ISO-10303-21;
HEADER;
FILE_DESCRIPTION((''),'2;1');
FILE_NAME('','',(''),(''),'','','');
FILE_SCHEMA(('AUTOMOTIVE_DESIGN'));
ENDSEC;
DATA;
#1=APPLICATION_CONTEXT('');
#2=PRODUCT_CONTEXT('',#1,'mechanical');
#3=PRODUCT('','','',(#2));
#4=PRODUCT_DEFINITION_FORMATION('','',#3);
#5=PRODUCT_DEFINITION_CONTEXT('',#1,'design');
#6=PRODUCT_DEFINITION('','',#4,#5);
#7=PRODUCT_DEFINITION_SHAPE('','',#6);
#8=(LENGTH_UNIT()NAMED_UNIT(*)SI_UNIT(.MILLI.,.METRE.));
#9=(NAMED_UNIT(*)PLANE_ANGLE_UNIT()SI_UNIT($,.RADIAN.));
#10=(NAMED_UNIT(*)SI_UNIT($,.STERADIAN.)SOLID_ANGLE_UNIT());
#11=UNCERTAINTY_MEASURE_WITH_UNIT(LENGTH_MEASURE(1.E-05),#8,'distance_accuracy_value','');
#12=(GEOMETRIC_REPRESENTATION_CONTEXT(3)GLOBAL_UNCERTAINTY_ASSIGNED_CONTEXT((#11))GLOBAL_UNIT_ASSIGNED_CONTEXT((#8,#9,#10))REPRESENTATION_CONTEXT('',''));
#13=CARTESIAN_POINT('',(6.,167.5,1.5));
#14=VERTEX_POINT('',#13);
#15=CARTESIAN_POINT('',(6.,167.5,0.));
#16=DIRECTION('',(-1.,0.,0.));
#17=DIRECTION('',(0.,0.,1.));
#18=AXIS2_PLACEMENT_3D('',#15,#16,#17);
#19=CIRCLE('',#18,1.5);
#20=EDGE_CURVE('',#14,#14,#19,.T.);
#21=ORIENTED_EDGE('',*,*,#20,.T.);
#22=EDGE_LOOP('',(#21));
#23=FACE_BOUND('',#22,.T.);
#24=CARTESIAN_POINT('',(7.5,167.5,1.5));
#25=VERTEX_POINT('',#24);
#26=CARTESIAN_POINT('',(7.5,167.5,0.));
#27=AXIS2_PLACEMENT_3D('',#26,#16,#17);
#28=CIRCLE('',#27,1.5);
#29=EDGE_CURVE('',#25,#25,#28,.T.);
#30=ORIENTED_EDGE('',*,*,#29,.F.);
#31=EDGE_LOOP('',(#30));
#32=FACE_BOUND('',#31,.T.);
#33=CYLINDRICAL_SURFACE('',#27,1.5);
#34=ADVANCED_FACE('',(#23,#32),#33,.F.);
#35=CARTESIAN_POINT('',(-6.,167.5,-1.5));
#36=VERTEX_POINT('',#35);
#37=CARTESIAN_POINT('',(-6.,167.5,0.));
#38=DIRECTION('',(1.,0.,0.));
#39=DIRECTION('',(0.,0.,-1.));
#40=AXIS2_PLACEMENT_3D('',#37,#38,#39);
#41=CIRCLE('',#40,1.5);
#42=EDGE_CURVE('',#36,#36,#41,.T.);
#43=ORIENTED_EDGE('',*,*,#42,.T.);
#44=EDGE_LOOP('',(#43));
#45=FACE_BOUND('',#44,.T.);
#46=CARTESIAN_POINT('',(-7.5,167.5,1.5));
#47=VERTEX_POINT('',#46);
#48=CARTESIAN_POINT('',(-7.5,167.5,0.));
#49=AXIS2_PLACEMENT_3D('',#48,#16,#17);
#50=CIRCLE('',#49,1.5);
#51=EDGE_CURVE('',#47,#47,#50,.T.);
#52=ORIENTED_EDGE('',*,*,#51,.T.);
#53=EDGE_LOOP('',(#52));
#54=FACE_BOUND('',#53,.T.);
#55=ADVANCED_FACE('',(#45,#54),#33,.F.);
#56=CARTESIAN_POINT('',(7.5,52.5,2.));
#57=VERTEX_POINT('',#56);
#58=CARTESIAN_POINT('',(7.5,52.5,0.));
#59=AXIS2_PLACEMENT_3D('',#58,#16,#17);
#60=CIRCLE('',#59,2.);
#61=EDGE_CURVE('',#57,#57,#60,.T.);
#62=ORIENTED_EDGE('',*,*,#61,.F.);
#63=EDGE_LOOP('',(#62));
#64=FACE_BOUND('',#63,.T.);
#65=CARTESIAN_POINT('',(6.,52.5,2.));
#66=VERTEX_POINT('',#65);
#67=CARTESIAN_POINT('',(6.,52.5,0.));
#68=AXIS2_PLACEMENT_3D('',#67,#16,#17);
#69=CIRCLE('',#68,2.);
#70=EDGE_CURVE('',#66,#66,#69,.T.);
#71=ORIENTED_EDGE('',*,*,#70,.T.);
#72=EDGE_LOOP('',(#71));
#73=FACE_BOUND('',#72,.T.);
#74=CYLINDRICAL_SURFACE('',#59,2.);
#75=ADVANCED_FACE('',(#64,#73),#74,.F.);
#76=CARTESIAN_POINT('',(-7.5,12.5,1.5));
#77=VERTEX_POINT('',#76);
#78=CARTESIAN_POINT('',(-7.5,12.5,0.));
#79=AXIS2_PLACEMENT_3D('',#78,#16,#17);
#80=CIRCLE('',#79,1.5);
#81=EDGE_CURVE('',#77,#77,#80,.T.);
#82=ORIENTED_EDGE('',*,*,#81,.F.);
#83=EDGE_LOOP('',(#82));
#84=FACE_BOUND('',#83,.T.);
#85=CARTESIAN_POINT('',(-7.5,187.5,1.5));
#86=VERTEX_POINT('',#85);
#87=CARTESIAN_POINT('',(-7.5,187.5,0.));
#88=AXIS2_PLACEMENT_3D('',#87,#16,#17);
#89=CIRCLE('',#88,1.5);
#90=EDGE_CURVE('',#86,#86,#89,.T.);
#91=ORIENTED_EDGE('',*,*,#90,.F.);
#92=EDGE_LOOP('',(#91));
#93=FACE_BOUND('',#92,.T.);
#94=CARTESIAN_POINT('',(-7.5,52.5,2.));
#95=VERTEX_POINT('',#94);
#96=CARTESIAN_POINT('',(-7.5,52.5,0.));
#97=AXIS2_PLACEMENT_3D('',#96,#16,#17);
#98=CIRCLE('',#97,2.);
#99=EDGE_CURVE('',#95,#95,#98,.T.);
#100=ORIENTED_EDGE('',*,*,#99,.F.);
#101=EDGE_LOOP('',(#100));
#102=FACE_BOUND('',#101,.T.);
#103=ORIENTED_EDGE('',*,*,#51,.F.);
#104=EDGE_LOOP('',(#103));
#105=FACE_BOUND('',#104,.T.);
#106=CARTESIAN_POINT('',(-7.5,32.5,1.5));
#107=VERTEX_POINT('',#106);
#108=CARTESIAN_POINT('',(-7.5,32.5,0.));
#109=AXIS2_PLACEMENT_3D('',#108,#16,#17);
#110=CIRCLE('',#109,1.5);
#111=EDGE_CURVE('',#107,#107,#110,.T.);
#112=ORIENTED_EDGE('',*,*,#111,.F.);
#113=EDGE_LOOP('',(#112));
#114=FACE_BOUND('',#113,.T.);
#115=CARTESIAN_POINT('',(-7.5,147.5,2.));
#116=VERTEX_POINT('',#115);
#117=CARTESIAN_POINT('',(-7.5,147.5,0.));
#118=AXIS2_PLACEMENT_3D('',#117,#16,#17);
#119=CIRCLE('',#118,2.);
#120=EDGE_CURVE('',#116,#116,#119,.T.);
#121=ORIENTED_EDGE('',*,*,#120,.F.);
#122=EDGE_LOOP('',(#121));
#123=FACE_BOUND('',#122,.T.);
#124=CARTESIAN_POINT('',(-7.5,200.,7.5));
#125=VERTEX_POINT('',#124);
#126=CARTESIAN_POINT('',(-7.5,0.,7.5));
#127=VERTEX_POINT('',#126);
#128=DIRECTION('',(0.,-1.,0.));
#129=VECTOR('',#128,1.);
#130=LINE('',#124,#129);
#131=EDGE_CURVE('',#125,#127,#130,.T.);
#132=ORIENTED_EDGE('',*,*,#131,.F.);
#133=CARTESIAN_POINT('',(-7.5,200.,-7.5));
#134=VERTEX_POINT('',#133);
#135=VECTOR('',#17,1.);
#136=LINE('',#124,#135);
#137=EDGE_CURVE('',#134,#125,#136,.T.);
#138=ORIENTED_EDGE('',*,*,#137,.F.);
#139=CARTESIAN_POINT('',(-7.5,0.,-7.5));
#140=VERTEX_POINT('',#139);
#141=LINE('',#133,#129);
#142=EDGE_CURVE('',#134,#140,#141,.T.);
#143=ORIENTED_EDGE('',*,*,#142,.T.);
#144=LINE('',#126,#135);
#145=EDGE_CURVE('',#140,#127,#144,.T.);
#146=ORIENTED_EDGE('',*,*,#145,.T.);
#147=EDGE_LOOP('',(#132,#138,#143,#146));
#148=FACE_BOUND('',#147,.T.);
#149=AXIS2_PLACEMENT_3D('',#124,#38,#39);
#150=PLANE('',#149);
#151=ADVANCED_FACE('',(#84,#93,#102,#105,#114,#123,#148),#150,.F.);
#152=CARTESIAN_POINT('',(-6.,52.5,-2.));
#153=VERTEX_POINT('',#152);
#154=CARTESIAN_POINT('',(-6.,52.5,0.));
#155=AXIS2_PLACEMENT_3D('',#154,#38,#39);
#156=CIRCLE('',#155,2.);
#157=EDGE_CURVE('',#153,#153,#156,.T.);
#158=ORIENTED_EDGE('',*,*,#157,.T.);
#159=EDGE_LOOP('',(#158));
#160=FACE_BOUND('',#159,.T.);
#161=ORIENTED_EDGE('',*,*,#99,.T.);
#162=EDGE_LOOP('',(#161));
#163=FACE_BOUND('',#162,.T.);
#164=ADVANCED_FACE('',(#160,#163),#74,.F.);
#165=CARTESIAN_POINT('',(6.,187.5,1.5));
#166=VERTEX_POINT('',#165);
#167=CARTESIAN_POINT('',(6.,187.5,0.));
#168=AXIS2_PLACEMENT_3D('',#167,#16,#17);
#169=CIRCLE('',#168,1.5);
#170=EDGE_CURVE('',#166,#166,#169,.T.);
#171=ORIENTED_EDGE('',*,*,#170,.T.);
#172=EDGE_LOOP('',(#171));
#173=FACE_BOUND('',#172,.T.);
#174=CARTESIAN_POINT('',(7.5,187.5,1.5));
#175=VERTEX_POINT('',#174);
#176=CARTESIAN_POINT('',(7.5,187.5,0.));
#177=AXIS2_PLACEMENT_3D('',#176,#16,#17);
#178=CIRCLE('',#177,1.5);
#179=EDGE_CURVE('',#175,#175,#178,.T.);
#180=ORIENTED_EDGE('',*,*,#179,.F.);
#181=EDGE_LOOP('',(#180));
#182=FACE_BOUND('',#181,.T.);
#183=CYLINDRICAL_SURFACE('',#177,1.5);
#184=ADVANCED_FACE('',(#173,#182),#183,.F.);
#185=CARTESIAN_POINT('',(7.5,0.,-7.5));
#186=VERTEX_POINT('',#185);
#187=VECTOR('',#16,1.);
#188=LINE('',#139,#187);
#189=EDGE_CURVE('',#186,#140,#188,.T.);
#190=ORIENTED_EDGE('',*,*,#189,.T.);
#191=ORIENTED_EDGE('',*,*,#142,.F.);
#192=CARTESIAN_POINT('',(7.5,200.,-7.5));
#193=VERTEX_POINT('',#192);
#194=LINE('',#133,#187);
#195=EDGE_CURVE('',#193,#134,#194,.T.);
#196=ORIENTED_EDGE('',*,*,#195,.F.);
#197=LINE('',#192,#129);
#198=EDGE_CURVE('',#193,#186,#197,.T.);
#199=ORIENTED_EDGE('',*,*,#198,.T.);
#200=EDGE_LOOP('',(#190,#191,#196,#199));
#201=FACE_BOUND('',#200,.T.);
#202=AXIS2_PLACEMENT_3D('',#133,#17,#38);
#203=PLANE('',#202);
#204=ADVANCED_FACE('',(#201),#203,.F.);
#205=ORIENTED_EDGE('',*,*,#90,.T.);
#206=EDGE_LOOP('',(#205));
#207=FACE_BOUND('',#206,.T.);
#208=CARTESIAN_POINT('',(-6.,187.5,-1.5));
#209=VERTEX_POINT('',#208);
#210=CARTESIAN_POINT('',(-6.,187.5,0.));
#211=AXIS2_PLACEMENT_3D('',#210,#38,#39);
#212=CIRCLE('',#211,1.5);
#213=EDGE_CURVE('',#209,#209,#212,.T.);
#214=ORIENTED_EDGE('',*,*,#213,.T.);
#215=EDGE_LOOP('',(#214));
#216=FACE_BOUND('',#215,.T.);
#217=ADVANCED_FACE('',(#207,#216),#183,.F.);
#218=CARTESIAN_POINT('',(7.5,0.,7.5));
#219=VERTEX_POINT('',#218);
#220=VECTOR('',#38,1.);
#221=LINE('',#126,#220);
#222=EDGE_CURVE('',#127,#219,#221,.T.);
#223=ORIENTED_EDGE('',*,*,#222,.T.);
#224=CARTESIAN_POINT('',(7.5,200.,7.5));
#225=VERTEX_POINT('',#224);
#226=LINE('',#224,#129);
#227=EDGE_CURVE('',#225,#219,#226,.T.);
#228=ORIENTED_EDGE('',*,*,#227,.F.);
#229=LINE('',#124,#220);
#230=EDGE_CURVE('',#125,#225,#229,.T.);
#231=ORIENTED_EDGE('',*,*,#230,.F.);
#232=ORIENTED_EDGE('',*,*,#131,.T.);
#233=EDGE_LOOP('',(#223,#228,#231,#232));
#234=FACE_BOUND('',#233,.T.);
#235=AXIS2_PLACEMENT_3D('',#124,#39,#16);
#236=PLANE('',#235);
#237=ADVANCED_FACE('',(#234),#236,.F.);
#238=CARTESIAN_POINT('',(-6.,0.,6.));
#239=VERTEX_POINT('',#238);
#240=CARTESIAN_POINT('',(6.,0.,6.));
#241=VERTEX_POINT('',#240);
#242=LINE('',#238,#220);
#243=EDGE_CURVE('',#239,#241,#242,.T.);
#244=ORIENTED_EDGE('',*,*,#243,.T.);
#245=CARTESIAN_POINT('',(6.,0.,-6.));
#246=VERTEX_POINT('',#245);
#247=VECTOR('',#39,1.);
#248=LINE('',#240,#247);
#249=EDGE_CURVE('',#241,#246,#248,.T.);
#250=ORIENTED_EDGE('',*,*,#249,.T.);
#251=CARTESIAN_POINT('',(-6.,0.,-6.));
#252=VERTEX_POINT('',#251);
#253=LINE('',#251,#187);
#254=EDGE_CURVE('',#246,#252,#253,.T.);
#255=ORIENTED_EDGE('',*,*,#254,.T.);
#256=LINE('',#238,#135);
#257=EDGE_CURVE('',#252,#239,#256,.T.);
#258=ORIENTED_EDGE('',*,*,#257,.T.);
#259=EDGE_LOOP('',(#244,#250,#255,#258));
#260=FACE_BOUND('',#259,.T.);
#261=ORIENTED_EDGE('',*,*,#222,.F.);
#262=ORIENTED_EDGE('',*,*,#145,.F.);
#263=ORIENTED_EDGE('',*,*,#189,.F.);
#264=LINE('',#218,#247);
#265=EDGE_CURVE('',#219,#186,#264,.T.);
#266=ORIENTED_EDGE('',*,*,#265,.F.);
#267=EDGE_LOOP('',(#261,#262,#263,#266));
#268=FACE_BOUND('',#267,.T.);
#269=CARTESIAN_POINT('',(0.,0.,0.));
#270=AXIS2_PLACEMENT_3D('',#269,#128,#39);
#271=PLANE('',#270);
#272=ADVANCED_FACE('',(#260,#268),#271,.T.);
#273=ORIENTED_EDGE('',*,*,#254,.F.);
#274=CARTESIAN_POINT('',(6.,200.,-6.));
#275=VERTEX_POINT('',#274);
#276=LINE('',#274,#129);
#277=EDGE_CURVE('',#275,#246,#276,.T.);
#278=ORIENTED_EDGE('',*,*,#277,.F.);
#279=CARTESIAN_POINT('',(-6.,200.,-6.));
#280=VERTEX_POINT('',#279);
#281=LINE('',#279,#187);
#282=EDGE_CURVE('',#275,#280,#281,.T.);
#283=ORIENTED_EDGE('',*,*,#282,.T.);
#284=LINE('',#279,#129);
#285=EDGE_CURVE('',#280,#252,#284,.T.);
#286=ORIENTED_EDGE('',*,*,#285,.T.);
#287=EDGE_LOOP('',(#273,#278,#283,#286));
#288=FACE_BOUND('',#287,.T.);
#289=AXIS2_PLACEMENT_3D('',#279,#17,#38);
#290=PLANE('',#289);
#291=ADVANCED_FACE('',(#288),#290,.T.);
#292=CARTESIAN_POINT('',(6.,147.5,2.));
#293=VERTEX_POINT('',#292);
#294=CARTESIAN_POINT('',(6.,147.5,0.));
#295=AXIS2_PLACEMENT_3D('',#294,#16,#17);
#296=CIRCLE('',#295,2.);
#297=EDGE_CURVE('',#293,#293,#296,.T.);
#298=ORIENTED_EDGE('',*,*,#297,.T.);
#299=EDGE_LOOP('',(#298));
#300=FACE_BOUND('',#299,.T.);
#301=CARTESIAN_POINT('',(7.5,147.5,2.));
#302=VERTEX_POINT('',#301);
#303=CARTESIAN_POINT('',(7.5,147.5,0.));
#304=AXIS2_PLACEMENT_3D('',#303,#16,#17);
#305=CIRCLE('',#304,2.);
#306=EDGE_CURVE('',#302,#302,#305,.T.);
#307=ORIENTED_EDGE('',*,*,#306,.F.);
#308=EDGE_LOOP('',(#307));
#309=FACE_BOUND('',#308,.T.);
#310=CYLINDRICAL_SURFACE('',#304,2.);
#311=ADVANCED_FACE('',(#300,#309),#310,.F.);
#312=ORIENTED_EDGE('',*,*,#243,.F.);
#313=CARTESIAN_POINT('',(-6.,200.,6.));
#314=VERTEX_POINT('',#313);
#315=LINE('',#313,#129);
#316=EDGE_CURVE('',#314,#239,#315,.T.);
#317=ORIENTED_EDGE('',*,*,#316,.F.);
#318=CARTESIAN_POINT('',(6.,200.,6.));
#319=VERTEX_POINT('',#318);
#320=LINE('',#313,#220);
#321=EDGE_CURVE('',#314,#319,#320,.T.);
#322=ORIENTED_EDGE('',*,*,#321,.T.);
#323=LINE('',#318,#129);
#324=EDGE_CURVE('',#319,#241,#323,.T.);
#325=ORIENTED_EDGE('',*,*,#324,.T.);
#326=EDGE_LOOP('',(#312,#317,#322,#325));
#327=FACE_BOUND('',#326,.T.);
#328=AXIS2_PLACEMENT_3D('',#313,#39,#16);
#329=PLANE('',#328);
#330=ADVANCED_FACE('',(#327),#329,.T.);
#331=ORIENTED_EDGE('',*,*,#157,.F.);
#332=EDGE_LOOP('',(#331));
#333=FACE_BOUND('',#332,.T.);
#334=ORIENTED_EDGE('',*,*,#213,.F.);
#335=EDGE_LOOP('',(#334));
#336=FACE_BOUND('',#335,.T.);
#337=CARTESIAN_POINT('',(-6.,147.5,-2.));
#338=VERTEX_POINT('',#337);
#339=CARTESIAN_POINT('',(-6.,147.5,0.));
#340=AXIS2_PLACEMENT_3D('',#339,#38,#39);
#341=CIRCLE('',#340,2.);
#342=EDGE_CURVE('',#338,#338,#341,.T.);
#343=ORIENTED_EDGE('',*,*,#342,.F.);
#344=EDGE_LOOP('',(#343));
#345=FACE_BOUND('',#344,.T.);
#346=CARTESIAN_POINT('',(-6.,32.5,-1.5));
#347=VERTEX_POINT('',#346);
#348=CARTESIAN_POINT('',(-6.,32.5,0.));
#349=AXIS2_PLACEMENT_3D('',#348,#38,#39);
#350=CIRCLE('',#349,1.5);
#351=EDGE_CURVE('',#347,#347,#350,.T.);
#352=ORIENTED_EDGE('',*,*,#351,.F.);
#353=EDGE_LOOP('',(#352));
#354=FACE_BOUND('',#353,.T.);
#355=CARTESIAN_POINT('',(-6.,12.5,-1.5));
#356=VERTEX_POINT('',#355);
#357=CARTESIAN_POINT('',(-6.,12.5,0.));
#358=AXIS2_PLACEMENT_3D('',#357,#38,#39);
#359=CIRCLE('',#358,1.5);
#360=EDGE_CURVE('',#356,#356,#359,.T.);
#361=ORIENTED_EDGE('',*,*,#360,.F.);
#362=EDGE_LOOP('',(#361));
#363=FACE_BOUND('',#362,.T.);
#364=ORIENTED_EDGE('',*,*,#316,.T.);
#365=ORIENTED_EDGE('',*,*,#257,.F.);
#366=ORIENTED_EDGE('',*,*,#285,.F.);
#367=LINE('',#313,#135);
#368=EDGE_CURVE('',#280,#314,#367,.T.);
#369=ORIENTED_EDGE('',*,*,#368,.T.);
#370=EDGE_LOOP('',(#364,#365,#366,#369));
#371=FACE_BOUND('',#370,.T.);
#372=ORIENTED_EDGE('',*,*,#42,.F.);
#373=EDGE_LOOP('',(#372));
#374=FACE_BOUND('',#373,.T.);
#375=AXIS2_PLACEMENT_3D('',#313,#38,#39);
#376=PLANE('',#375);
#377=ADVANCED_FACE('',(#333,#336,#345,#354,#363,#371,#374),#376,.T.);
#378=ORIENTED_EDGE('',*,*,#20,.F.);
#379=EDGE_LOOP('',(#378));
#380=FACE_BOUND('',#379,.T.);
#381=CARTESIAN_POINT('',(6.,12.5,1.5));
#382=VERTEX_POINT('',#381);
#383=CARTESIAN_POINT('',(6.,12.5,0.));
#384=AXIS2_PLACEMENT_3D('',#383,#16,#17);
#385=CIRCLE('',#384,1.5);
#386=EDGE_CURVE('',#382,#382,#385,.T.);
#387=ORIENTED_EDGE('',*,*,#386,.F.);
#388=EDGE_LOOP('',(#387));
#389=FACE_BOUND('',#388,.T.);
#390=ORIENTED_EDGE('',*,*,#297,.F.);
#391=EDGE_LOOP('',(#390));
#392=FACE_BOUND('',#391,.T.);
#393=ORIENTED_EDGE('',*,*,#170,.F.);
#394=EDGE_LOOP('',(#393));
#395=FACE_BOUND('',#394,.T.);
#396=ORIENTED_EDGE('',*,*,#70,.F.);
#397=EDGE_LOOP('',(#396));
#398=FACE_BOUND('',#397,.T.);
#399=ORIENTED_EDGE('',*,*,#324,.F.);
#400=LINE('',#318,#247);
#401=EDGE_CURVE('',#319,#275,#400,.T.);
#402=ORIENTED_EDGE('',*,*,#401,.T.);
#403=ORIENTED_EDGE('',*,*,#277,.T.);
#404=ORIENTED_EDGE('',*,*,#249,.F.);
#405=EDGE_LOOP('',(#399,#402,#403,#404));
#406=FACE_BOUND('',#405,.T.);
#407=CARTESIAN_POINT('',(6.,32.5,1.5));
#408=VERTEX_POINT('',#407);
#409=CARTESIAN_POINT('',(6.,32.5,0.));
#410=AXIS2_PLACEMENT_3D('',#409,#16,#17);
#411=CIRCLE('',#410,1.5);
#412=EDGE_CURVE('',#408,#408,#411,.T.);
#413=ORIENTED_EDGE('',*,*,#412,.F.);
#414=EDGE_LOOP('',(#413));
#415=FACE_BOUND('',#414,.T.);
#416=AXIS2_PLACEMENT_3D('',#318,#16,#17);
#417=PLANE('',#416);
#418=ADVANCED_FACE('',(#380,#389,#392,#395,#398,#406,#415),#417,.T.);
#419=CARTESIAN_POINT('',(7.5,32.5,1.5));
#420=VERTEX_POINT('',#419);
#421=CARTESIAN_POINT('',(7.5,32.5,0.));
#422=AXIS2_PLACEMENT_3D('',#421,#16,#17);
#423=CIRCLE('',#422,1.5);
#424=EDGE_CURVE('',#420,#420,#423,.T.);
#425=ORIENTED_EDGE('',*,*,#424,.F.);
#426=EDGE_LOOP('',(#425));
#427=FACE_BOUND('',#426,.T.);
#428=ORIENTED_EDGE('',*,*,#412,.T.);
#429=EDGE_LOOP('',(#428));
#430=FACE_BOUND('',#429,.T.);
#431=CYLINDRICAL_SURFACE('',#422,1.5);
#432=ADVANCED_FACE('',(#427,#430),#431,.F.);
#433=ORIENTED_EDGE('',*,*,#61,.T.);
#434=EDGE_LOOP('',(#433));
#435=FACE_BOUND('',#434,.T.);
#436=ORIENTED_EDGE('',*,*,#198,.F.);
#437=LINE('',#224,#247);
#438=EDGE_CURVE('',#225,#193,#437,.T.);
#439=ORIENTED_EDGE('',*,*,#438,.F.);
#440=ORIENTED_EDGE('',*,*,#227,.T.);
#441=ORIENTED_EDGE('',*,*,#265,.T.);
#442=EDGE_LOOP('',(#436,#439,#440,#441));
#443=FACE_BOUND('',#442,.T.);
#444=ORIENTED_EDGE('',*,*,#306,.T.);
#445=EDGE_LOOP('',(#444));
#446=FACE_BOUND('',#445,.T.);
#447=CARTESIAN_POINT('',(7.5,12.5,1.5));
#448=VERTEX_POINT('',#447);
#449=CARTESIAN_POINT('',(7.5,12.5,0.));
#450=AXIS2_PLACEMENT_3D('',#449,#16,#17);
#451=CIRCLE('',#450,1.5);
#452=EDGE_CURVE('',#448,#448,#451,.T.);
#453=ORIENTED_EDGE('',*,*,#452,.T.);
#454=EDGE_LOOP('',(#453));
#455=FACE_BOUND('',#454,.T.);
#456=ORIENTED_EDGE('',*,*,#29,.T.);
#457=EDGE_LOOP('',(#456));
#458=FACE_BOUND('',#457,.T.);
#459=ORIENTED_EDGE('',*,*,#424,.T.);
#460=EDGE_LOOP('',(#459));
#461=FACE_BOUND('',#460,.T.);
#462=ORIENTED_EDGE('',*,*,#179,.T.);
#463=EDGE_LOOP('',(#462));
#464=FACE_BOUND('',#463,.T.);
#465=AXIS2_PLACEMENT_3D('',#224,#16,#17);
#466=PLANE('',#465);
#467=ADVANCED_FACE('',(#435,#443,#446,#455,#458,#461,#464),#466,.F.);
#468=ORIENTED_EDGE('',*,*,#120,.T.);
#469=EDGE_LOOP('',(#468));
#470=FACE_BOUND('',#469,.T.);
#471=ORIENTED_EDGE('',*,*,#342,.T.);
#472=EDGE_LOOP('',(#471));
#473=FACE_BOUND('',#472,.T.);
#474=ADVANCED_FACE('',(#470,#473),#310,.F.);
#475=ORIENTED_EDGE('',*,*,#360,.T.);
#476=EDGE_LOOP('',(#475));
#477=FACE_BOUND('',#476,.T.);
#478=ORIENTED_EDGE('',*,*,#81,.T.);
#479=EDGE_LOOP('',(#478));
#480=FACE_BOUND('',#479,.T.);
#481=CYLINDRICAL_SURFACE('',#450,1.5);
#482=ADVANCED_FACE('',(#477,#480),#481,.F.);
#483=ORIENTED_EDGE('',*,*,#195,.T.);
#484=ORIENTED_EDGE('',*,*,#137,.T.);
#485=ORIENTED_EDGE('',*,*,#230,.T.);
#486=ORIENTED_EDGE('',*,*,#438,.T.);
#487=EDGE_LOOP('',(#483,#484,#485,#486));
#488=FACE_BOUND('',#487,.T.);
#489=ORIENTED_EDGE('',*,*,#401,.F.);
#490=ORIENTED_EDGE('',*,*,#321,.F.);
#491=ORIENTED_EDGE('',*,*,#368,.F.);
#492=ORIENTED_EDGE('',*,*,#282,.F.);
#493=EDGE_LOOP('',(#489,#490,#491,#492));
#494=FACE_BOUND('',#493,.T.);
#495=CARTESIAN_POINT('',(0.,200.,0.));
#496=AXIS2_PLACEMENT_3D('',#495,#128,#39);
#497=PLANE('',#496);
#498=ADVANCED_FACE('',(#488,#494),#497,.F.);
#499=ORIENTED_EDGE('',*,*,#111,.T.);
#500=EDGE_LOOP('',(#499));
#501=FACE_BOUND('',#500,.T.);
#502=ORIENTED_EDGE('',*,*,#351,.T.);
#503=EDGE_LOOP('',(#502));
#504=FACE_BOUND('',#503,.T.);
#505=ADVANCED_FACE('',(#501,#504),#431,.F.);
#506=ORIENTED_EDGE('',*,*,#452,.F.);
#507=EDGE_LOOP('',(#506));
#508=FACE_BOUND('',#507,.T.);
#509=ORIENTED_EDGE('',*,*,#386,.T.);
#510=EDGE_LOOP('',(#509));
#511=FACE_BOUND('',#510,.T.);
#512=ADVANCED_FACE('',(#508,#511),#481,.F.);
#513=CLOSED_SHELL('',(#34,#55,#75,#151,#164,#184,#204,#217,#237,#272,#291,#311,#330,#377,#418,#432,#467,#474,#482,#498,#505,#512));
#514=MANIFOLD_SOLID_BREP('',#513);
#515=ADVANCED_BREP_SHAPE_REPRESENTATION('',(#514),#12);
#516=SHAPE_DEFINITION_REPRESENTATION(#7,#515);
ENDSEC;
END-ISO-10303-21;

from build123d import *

# Parameters (mm, degrees)
SKETCH_1_W                = 15
SKETCH_1_H                = 15
SKETCH_1_W_2              = 12
SKETCH_1_H_2              = 12
EXTRUDE_1_DEPTH           = 200
CUT_EXTRUDE_START         = -7.5
CUT_EXTRUDE_1_OUTLINE_R   = 1.5
CUT_EXTRUDE_1_OUTLINE_R_2 = 2
CUT_EXTRUDE_1_DEPTH       = 15


# Read off the part's stored shape, not the designer's step: 切除-拉伸1
with BuildPart() as part:
    # 草图1 → 凸台-拉伸1 (new body)
    with BuildSketch(Plane(origin=(0, 0, 0), x_dir=(1, 0, 0), z_dir=(0, 1, 0))):
        Rectangle(SKETCH_1_W, SKETCH_1_H)
        Rectangle(SKETCH_1_W_2, SKETCH_1_H_2, mode=Mode.SUBTRACT)
    extrude(amount=EXTRUDE_1_DEPTH)

    # 切除-拉伸1 outline → 切除-拉伸1 (cut)
    with BuildSketch(Plane.YZ.offset(CUT_EXTRUDE_START)):
        with Locations((12.5, 0)):
            Circle(CUT_EXTRUDE_1_OUTLINE_R)
        with Locations((32.5, 0)):
            Circle(CUT_EXTRUDE_1_OUTLINE_R)
        with Locations((52.5, 0)):
            Circle(CUT_EXTRUDE_1_OUTLINE_R_2)
        with Locations((147.5, 0)):
            Circle(CUT_EXTRUDE_1_OUTLINE_R_2)
        with Locations((167.5, 0)):
            Circle(CUT_EXTRUDE_1_OUTLINE_R)
        with Locations((187.5, 0)):
            Circle(CUT_EXTRUDE_1_OUTLINE_R)
    extrude(amount=CUT_EXTRUDE_1_DEPTH, mode=Mode.SUBTRACT)


solid = part.part
